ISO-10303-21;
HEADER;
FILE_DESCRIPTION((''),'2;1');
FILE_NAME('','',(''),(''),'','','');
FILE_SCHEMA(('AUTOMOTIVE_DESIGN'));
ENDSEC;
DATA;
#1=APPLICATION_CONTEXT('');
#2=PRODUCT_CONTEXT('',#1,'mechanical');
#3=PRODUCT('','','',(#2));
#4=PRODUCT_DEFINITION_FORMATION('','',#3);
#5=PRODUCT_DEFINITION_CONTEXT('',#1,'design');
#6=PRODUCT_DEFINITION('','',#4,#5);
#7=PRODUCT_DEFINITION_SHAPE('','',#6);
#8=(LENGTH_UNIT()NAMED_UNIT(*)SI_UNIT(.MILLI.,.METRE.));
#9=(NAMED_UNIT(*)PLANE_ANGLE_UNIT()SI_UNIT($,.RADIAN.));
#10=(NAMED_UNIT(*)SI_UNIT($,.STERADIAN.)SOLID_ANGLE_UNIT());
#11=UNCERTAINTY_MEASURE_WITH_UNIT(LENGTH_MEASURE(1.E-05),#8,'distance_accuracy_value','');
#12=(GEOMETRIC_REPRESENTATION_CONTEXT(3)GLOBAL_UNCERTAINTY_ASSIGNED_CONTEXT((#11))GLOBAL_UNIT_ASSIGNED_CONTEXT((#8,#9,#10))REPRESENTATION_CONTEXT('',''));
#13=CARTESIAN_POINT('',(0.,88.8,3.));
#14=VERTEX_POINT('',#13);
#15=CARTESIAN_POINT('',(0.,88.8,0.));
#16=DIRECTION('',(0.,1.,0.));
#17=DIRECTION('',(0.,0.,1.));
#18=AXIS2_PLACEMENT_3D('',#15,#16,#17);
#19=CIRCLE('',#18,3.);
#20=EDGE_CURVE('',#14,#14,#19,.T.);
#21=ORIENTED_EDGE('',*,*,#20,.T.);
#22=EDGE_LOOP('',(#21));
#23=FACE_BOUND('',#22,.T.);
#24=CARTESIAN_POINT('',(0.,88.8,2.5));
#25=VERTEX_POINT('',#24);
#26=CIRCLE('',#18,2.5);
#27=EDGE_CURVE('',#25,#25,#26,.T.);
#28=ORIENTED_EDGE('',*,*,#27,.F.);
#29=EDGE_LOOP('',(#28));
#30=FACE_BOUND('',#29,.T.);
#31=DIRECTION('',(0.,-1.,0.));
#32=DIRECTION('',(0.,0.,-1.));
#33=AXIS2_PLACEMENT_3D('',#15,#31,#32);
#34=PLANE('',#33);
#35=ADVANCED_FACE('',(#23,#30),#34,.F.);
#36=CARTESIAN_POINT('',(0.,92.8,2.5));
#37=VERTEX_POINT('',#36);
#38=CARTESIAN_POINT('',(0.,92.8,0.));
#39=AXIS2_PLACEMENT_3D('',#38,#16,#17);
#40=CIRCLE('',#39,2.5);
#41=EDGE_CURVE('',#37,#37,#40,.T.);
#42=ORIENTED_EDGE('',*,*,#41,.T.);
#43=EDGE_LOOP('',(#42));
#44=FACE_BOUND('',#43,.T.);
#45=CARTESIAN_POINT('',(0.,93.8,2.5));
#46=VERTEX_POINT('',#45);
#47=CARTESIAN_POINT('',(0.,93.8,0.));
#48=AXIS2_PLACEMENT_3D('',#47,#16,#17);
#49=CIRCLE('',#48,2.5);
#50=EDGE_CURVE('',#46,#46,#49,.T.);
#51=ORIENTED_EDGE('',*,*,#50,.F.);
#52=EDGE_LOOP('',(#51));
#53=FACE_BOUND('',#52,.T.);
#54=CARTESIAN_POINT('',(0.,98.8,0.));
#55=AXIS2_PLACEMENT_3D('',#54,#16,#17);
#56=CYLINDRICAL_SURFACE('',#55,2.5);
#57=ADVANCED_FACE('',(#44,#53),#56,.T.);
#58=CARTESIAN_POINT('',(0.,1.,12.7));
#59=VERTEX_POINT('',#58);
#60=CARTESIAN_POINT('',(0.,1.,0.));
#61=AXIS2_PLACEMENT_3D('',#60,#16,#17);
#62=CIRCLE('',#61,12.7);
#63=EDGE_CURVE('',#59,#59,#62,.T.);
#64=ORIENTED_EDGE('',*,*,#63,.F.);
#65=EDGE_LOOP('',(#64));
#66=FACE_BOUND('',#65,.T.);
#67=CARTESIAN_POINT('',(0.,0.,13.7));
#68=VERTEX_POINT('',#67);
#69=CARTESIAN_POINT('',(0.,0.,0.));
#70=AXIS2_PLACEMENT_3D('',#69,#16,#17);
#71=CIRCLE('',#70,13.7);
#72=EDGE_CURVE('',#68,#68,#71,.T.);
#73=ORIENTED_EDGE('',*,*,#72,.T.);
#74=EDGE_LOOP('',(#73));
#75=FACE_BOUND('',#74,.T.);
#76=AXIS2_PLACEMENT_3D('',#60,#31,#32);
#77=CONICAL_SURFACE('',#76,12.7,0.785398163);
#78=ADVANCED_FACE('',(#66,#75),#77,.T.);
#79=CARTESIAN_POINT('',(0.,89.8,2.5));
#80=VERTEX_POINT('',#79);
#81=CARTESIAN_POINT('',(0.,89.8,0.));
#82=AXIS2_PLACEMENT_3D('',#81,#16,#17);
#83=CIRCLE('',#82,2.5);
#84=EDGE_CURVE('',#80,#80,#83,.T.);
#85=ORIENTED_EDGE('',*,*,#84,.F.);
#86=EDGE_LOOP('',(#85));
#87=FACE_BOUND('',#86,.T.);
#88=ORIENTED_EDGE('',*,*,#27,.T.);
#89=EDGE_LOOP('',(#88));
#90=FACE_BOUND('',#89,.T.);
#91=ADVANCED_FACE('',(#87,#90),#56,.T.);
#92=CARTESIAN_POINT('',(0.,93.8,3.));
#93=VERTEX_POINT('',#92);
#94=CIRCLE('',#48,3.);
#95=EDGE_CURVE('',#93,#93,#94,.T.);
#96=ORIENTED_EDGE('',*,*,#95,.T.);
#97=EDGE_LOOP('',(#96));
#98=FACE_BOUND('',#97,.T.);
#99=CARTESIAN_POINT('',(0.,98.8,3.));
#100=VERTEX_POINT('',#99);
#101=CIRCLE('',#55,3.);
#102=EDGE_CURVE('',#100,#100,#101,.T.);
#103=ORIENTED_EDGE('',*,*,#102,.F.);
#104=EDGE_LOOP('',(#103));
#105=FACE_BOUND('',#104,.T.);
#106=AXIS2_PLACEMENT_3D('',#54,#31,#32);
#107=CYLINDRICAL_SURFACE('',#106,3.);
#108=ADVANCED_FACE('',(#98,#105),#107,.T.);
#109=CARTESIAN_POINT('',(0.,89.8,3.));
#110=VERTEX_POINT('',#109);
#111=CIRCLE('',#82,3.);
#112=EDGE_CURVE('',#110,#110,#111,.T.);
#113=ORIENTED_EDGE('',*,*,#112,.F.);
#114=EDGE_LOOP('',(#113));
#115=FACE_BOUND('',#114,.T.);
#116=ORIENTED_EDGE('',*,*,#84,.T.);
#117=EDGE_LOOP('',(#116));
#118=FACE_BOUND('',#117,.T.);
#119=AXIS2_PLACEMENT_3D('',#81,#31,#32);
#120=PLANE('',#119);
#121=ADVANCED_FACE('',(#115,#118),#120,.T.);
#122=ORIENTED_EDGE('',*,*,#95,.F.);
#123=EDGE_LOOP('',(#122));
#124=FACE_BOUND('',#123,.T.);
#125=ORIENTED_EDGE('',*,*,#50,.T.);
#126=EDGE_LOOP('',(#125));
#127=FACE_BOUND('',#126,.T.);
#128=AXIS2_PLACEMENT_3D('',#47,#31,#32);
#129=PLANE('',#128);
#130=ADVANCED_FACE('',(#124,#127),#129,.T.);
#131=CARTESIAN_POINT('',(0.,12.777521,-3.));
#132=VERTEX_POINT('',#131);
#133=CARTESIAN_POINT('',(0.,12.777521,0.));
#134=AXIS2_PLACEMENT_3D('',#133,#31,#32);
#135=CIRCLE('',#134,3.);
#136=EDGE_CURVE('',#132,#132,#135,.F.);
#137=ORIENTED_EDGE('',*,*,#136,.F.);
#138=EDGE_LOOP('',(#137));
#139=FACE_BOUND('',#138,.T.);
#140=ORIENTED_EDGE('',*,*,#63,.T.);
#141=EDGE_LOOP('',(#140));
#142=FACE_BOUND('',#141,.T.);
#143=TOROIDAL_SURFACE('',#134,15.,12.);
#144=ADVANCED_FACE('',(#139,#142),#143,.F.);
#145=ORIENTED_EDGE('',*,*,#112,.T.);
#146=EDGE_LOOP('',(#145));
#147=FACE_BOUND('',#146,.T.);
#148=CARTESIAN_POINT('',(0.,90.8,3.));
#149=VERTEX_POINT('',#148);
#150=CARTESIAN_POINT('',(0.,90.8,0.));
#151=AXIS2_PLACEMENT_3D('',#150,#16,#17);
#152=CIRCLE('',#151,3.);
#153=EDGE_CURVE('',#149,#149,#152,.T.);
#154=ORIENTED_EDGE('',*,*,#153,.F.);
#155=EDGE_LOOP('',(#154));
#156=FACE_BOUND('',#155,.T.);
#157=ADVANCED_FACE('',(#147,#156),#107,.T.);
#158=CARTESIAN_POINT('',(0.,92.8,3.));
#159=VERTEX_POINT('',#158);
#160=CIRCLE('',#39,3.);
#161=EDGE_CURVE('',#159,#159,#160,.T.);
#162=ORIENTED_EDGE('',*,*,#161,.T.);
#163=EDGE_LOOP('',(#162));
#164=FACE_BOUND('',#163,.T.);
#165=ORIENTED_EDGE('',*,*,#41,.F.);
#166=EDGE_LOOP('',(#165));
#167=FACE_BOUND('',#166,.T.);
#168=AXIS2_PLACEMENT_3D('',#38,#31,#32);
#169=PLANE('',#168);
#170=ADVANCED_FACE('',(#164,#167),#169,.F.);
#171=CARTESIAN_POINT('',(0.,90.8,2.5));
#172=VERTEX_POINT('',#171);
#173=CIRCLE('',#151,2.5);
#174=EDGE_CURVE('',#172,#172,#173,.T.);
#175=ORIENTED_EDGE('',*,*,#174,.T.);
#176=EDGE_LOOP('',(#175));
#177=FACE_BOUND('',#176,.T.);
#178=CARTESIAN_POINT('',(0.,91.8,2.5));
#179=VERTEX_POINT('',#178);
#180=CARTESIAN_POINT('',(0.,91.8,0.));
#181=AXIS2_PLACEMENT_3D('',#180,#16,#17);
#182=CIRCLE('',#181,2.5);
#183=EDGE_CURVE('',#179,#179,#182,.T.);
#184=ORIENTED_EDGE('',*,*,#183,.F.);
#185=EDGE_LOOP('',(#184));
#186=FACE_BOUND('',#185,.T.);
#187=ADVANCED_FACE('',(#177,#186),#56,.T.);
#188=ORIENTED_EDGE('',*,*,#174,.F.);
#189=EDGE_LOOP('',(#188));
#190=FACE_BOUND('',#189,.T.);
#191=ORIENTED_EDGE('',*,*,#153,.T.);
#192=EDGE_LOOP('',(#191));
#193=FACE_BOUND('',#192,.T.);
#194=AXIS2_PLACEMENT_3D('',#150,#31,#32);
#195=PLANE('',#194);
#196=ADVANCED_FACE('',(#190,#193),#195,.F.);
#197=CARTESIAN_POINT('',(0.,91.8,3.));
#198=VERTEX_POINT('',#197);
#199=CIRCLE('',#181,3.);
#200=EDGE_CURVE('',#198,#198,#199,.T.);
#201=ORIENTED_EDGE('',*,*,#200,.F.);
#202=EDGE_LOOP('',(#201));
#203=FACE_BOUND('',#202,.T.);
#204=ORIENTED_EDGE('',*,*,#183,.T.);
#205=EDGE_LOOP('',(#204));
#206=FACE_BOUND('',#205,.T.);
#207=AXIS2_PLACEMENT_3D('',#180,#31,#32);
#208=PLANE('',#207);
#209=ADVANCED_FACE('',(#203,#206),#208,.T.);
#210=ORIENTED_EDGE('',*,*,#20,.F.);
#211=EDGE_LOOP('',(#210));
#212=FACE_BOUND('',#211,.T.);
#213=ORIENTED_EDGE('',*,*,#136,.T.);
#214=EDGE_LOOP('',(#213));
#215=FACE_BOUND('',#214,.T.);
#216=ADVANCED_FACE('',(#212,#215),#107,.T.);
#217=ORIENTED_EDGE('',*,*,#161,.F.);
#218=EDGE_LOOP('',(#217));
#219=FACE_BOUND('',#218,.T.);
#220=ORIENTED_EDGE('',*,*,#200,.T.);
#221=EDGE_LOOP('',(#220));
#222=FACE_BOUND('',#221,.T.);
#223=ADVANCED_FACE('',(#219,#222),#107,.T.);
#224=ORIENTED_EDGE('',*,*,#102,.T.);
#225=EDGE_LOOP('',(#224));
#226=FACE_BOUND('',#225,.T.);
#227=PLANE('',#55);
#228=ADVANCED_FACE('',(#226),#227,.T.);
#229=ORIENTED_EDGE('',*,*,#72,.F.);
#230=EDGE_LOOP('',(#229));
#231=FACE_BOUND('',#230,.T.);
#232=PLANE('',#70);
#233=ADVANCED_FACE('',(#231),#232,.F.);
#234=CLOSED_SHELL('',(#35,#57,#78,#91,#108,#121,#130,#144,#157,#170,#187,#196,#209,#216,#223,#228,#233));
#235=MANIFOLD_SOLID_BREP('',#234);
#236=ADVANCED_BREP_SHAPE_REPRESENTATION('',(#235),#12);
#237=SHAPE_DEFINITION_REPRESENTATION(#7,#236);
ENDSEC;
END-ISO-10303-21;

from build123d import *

# Parameters (mm, degrees)
SKETCH1_R           = 13.7
BOSS_EXTRUDE1_DEPTH = 1
CHAMFER2_SIZE       = 1
SKETCH4_R           = 3
BOSS_EXTRUDE2_DEPTH = 97.8
FILLET1_R           = 12
SKETCH5_W           = 0.49999999999999956
SKETCH5_H           = 1


# Some blends are built 0.0001 mm under size
with BuildPart() as part:
    # Sketch1 → Boss-Extrude1 (new body)
    with BuildSketch(Plane(origin=(0, 0, 0), x_dir=(1, 0, 0), z_dir=(0, 1, 0))):
        with Locations(Location((0, 0, 0), (0, 0, 270))):
            Circle(SKETCH1_R)
    extrude(amount=BOSS_EXTRUDE1_DEPTH)

    # Chamfer2
    chamfer2_edges = [part.edges().sort_by_distance(p)[0] for p in [
        (4.19e-15, 1, -13.7),
    ]]
    chamfer(chamfer2_edges, length=CHAMFER2_SIZE - 0.0001)  # a hair under: the kernel refuses the full size

    # Sketch4 → Boss-Extrude2 (add)
    with BuildSketch(Plane(origin=(0, 1, 0), x_dir=(1, 0, 0), z_dir=(0, 1, 0))):
        with Locations(Location((0, 0, 0), (0, 0, 270))):
            Circle(SKETCH4_R)
    extrude(amount=BOSS_EXTRUDE2_DEPTH)

    # Fillet1
    # the kernel refuses this fillet: 12 mm, written as the material it adds along each edge
    with BuildSketch(Plane(origin=(0, 1, 0), x_dir=(-1.8e-16, 0, 1), z_dir=(-1, 0, -1.8e-16))) as fillet1_piece_1:
        with BuildLine():
            CenterArc((15, 11.777540489856218), FILLET1_R, 180, 78.95042152448133)
            Line((3, 11.777540489856218), (2.76, 11.777540489856218))
            Line((2.76, 11.777540489856218), (2.76, 0))
            Line((2.76, 0), (3, -0.24))
            ThreePointArc((3, -0.24), (7.850050000000809, -0.24), (12.65410200000165, -0.23555080978867193))
            Line((12.65410200000165, -0.23555080978867193), (12.700100000001617, 8.2867e-12))
        make_face()
    revolve(axis=Axis((0, 1, 0), (0, 1, 0)))

    # Sketch5 → Cut-Revolve1 (revolve, cut)
    with BuildSketch(Plane.XY, mode=Mode.PRIVATE) as cut_revolve1_sk:
        with Locations((-2.75, 93.30000000000001)):
            Rectangle(SKETCH5_W, SKETCH5_H)
        with Locations((-2.75, 91.3)):
            Rectangle(SKETCH5_W, SKETCH5_H)
        Polygon((-2.500000000000001, 89.8), (-2.5000000000000004, 88.79999999999998), (-3.0000000000000004, 88.79999999999998), (-3.0000000000000004, 89.8), align=None)
    revolve(cut_revolve1_sk.sketch.rotate(Axis((0, 98.8, 0), (0, -1, 0)), 270), axis=Axis((0, 98.8, 0), (0, -1, 0)), mode=Mode.SUBTRACT)


solid = part.part
